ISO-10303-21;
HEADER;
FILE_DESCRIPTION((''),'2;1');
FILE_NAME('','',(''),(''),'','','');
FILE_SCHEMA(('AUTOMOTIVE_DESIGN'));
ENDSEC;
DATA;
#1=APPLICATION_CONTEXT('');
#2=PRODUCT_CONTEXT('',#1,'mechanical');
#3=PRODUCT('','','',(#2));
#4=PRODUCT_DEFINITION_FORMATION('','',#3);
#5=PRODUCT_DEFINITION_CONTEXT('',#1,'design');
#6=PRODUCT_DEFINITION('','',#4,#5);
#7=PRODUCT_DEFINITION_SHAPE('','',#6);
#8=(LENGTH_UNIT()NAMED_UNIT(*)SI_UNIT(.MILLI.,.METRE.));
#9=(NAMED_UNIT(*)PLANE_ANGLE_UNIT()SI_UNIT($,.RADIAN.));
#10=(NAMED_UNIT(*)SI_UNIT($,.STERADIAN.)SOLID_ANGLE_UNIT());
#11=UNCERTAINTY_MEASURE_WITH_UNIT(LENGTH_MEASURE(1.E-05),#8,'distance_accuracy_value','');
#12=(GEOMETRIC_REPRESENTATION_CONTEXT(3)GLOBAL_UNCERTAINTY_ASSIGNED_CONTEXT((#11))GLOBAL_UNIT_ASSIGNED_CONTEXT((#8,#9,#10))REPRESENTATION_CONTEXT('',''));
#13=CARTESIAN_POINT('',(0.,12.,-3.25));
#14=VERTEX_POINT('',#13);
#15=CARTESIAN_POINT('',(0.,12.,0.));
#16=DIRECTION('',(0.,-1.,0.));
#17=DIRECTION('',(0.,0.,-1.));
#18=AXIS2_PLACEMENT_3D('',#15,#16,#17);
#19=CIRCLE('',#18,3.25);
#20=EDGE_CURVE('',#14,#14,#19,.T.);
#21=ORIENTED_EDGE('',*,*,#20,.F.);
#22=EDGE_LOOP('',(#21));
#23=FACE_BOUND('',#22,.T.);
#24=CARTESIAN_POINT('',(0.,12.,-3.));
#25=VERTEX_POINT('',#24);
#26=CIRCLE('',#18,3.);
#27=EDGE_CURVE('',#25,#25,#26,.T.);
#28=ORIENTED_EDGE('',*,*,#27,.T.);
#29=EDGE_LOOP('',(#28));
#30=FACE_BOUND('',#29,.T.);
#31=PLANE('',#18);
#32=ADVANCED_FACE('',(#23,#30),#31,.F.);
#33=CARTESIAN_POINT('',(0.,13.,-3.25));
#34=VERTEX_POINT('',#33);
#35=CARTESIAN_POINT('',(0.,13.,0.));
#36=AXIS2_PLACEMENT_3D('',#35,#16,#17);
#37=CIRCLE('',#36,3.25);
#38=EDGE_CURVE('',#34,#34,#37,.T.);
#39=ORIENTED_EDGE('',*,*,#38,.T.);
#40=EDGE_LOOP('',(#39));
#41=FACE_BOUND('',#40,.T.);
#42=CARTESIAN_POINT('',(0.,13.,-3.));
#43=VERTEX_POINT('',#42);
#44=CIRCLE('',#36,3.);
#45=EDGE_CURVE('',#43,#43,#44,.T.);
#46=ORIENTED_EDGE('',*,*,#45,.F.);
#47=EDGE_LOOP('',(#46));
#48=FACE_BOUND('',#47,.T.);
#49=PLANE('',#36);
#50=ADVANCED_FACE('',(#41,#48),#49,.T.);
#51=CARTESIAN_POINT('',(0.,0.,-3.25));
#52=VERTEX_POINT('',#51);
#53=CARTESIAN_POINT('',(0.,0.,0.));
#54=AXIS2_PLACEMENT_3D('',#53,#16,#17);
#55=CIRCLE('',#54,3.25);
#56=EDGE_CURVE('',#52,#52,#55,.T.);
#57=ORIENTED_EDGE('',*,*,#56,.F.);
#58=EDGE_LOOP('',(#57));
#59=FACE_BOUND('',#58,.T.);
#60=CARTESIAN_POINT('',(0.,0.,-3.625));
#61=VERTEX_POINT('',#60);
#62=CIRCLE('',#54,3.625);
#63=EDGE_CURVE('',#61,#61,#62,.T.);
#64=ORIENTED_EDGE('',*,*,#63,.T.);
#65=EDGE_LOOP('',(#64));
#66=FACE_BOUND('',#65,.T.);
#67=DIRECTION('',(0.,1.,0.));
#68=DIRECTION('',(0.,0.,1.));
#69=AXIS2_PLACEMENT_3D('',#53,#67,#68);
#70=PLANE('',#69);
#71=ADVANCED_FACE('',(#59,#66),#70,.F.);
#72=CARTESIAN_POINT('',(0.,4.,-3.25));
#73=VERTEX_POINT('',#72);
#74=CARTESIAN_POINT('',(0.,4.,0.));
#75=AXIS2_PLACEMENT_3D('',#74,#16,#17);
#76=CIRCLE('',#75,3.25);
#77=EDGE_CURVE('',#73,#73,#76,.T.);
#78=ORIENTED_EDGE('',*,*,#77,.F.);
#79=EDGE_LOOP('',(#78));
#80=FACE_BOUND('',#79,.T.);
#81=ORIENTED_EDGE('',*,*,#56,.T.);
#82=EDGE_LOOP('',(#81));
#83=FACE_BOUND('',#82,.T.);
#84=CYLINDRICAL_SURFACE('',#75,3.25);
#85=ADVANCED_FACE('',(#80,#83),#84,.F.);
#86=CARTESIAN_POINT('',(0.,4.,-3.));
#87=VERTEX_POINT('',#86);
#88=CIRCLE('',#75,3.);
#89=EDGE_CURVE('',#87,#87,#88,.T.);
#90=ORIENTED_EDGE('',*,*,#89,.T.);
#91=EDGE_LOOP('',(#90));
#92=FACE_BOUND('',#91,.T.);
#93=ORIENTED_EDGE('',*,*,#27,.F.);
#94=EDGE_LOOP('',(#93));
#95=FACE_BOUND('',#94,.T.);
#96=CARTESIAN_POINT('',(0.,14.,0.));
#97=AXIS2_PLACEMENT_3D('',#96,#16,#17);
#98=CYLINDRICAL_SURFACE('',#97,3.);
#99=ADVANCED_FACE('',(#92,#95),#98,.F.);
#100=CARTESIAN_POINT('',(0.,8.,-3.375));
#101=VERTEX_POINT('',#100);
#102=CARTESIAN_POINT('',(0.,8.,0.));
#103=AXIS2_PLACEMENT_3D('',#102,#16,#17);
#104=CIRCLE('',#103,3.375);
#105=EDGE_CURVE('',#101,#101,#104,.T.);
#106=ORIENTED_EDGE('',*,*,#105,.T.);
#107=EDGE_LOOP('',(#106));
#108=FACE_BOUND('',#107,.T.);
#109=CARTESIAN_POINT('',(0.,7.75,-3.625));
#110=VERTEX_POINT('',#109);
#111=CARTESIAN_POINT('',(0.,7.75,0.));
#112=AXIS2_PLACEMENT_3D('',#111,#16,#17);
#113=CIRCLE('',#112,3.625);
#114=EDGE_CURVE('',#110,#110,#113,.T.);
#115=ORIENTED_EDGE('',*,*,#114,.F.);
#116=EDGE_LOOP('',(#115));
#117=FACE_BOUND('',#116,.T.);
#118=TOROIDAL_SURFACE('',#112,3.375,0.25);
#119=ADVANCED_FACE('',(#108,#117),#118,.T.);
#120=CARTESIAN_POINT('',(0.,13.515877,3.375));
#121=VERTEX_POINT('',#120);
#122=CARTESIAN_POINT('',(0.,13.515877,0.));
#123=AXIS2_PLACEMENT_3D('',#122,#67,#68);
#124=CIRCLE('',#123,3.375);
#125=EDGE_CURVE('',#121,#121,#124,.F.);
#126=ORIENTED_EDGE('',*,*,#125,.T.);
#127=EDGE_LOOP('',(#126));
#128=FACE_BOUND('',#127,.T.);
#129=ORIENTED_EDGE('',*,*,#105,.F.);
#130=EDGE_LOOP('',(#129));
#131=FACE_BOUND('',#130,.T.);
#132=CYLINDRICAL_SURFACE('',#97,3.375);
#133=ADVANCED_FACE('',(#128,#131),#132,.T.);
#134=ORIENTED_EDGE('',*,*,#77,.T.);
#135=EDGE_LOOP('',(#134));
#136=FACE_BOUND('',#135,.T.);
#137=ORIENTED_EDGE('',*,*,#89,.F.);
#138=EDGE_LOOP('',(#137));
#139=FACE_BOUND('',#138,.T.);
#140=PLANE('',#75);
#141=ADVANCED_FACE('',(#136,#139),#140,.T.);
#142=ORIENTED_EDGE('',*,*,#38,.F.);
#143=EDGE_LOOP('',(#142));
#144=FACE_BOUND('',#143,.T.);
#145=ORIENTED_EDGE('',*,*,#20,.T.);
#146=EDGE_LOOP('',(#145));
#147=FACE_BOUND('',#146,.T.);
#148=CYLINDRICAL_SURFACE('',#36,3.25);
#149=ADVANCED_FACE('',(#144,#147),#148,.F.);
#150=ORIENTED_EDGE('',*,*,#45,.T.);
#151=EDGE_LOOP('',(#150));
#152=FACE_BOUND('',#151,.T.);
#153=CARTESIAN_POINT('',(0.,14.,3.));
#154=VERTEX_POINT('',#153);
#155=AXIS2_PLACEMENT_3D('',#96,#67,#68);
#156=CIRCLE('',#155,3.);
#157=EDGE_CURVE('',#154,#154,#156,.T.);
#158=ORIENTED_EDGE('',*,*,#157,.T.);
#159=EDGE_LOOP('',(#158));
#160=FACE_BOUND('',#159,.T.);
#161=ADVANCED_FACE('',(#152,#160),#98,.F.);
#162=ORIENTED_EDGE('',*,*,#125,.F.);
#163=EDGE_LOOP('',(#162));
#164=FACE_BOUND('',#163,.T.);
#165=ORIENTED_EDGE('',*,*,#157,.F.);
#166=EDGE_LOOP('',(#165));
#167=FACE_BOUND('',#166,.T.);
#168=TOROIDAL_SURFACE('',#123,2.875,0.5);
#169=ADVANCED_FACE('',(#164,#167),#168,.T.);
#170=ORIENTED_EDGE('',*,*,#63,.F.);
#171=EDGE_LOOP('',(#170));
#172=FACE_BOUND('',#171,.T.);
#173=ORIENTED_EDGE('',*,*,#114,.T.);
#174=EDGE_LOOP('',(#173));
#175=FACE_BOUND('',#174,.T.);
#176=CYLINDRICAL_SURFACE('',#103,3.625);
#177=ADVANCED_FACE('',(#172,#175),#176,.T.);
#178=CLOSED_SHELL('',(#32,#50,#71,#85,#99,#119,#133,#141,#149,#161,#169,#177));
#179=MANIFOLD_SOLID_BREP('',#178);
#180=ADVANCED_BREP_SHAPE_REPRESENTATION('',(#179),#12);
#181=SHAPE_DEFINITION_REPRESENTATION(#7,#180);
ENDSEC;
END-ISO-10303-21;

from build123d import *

# Parameters (mm, degrees)
SKETCH1_R           = 3.375
SKETCH1_R_2         = 3
BOSS_EXTRUDE1_DEPTH = 14
SKETCH2_R           = 3.625
SKETCH2_R_2         = 3
BOSS_EXTRUDE2_DEPTH = 8
FILLET1_R           = 0.25
BOSS_EXTRUDE3_START = -0.5
SKETCH3_R           = 3.375
SKETCH3_R_2         = 3
BOSS_EXTRUDE3_DEPTH = 0.5
FILLET2_R           = 0.5
SKETCH4_R           = 3.25
CUT_EXTRUDE1_DEPTH  = 4
SKETCH5_R           = 3.25
CUT_EXTRUDE2_DEPTH  = 1


# Some blends are built 0.0001 mm under size
with BuildPart() as part:
    # Sketch1 → Boss-Extrude1 (new body)
    with BuildSketch(Plane(origin=(0, 0, 0), x_dir=(1, 0, 0), z_dir=(0, 1, 0))):
        with Locations(Location((0, 0, 0), (0, 0, 270))):
            Circle(SKETCH1_R)
        with Locations(Location((0, 0, 0), (0, 0, 270))):
            Circle(SKETCH1_R_2, mode=Mode.SUBTRACT)
    extrude(amount=BOSS_EXTRUDE1_DEPTH)

    # Sketch2 → Boss-Extrude2 (add)
    with BuildSketch(Plane.XZ):
        with Locations(Location((0, 0, 0), (0, 0, 270))):
            Circle(SKETCH2_R)
        with Locations(Location((0, 0, 0), (0, 0, 90))):
            Circle(SKETCH2_R_2, mode=Mode.SUBTRACT)
    extrude(amount=-BOSS_EXTRUDE2_DEPTH)

    # Fillet1
    fillet1_edges = [part.edges().sort_by_distance(p)[0] for p in [
        (0, 8, 3.625),
    ]]
    fillet(fillet1_edges, radius=FILLET1_R - 0.0001)  # a hair under: the kernel refuses the full size

    # Sketch3 → Boss-Extrude3 (add)
    with BuildSketch(Plane(origin=(0, 14, 0), x_dir=(1, 0, 0), z_dir=(0, 1, 0)).offset(BOSS_EXTRUDE3_START)):
        with Locations(Location((0, 0, 0), (0, 0, 90))):
            Circle(SKETCH3_R)
        with Locations(Location((0, 0, 0), (0, 0, 270))):
            Circle(SKETCH3_R_2, mode=Mode.SUBTRACT)
    extrude(amount=BOSS_EXTRUDE3_DEPTH)

    # Fillet2
    # the kernel refuses this fillet: 0.5 mm, written as the material it takes off along each edge
    with BuildSketch(Plane(origin=(0, 14, 0), x_dir=(0, 0, 1), z_dir=(1, 0, 0))) as fillet2_piece_1:
        with BuildLine():
            CenterArc((2.875, 0.484122918), FILLET2_R, 284.477512186, 75.522487814)
            Line((3.375, 0.484122918), (3.385, 0.484122918))
            Line((3.385, 0.484122918), (3.385, 0))
            Line((3.385, 0), (3.375, -0.01))
            ThreePointArc((3.375, -0.01), (3.1875, -0.01), (3.0025, -0.009682458))
            Line((3.0025, -0.009682458), (3, 0))
        make_face()
    revolve(axis=Axis((0, 14, 0), (0, -1, 0)), mode=Mode.SUBTRACT)

    # Sketch4 → Cut-Extrude1 (cut)
    with BuildSketch(Plane.XZ):
        with Locations(Location((0, 0, 0), (0, 0, 270))):
            Circle(SKETCH4_R)
    extrude(amount=-CUT_EXTRUDE1_DEPTH, mode=Mode.SUBTRACT)

    # Sketch5 → Cut-Extrude2 (cut)
    with BuildSketch(Plane(origin=(0, 12, 0), x_dir=(-1, 0, 0), z_dir=(0, -1, 0))):
        with Locations(Location((0, 0, 0), (0, 0, 90))):
            Circle(SKETCH5_R)
    extrude(amount=-CUT_EXTRUDE2_DEPTH, mode=Mode.SUBTRACT)


solid = part.part
